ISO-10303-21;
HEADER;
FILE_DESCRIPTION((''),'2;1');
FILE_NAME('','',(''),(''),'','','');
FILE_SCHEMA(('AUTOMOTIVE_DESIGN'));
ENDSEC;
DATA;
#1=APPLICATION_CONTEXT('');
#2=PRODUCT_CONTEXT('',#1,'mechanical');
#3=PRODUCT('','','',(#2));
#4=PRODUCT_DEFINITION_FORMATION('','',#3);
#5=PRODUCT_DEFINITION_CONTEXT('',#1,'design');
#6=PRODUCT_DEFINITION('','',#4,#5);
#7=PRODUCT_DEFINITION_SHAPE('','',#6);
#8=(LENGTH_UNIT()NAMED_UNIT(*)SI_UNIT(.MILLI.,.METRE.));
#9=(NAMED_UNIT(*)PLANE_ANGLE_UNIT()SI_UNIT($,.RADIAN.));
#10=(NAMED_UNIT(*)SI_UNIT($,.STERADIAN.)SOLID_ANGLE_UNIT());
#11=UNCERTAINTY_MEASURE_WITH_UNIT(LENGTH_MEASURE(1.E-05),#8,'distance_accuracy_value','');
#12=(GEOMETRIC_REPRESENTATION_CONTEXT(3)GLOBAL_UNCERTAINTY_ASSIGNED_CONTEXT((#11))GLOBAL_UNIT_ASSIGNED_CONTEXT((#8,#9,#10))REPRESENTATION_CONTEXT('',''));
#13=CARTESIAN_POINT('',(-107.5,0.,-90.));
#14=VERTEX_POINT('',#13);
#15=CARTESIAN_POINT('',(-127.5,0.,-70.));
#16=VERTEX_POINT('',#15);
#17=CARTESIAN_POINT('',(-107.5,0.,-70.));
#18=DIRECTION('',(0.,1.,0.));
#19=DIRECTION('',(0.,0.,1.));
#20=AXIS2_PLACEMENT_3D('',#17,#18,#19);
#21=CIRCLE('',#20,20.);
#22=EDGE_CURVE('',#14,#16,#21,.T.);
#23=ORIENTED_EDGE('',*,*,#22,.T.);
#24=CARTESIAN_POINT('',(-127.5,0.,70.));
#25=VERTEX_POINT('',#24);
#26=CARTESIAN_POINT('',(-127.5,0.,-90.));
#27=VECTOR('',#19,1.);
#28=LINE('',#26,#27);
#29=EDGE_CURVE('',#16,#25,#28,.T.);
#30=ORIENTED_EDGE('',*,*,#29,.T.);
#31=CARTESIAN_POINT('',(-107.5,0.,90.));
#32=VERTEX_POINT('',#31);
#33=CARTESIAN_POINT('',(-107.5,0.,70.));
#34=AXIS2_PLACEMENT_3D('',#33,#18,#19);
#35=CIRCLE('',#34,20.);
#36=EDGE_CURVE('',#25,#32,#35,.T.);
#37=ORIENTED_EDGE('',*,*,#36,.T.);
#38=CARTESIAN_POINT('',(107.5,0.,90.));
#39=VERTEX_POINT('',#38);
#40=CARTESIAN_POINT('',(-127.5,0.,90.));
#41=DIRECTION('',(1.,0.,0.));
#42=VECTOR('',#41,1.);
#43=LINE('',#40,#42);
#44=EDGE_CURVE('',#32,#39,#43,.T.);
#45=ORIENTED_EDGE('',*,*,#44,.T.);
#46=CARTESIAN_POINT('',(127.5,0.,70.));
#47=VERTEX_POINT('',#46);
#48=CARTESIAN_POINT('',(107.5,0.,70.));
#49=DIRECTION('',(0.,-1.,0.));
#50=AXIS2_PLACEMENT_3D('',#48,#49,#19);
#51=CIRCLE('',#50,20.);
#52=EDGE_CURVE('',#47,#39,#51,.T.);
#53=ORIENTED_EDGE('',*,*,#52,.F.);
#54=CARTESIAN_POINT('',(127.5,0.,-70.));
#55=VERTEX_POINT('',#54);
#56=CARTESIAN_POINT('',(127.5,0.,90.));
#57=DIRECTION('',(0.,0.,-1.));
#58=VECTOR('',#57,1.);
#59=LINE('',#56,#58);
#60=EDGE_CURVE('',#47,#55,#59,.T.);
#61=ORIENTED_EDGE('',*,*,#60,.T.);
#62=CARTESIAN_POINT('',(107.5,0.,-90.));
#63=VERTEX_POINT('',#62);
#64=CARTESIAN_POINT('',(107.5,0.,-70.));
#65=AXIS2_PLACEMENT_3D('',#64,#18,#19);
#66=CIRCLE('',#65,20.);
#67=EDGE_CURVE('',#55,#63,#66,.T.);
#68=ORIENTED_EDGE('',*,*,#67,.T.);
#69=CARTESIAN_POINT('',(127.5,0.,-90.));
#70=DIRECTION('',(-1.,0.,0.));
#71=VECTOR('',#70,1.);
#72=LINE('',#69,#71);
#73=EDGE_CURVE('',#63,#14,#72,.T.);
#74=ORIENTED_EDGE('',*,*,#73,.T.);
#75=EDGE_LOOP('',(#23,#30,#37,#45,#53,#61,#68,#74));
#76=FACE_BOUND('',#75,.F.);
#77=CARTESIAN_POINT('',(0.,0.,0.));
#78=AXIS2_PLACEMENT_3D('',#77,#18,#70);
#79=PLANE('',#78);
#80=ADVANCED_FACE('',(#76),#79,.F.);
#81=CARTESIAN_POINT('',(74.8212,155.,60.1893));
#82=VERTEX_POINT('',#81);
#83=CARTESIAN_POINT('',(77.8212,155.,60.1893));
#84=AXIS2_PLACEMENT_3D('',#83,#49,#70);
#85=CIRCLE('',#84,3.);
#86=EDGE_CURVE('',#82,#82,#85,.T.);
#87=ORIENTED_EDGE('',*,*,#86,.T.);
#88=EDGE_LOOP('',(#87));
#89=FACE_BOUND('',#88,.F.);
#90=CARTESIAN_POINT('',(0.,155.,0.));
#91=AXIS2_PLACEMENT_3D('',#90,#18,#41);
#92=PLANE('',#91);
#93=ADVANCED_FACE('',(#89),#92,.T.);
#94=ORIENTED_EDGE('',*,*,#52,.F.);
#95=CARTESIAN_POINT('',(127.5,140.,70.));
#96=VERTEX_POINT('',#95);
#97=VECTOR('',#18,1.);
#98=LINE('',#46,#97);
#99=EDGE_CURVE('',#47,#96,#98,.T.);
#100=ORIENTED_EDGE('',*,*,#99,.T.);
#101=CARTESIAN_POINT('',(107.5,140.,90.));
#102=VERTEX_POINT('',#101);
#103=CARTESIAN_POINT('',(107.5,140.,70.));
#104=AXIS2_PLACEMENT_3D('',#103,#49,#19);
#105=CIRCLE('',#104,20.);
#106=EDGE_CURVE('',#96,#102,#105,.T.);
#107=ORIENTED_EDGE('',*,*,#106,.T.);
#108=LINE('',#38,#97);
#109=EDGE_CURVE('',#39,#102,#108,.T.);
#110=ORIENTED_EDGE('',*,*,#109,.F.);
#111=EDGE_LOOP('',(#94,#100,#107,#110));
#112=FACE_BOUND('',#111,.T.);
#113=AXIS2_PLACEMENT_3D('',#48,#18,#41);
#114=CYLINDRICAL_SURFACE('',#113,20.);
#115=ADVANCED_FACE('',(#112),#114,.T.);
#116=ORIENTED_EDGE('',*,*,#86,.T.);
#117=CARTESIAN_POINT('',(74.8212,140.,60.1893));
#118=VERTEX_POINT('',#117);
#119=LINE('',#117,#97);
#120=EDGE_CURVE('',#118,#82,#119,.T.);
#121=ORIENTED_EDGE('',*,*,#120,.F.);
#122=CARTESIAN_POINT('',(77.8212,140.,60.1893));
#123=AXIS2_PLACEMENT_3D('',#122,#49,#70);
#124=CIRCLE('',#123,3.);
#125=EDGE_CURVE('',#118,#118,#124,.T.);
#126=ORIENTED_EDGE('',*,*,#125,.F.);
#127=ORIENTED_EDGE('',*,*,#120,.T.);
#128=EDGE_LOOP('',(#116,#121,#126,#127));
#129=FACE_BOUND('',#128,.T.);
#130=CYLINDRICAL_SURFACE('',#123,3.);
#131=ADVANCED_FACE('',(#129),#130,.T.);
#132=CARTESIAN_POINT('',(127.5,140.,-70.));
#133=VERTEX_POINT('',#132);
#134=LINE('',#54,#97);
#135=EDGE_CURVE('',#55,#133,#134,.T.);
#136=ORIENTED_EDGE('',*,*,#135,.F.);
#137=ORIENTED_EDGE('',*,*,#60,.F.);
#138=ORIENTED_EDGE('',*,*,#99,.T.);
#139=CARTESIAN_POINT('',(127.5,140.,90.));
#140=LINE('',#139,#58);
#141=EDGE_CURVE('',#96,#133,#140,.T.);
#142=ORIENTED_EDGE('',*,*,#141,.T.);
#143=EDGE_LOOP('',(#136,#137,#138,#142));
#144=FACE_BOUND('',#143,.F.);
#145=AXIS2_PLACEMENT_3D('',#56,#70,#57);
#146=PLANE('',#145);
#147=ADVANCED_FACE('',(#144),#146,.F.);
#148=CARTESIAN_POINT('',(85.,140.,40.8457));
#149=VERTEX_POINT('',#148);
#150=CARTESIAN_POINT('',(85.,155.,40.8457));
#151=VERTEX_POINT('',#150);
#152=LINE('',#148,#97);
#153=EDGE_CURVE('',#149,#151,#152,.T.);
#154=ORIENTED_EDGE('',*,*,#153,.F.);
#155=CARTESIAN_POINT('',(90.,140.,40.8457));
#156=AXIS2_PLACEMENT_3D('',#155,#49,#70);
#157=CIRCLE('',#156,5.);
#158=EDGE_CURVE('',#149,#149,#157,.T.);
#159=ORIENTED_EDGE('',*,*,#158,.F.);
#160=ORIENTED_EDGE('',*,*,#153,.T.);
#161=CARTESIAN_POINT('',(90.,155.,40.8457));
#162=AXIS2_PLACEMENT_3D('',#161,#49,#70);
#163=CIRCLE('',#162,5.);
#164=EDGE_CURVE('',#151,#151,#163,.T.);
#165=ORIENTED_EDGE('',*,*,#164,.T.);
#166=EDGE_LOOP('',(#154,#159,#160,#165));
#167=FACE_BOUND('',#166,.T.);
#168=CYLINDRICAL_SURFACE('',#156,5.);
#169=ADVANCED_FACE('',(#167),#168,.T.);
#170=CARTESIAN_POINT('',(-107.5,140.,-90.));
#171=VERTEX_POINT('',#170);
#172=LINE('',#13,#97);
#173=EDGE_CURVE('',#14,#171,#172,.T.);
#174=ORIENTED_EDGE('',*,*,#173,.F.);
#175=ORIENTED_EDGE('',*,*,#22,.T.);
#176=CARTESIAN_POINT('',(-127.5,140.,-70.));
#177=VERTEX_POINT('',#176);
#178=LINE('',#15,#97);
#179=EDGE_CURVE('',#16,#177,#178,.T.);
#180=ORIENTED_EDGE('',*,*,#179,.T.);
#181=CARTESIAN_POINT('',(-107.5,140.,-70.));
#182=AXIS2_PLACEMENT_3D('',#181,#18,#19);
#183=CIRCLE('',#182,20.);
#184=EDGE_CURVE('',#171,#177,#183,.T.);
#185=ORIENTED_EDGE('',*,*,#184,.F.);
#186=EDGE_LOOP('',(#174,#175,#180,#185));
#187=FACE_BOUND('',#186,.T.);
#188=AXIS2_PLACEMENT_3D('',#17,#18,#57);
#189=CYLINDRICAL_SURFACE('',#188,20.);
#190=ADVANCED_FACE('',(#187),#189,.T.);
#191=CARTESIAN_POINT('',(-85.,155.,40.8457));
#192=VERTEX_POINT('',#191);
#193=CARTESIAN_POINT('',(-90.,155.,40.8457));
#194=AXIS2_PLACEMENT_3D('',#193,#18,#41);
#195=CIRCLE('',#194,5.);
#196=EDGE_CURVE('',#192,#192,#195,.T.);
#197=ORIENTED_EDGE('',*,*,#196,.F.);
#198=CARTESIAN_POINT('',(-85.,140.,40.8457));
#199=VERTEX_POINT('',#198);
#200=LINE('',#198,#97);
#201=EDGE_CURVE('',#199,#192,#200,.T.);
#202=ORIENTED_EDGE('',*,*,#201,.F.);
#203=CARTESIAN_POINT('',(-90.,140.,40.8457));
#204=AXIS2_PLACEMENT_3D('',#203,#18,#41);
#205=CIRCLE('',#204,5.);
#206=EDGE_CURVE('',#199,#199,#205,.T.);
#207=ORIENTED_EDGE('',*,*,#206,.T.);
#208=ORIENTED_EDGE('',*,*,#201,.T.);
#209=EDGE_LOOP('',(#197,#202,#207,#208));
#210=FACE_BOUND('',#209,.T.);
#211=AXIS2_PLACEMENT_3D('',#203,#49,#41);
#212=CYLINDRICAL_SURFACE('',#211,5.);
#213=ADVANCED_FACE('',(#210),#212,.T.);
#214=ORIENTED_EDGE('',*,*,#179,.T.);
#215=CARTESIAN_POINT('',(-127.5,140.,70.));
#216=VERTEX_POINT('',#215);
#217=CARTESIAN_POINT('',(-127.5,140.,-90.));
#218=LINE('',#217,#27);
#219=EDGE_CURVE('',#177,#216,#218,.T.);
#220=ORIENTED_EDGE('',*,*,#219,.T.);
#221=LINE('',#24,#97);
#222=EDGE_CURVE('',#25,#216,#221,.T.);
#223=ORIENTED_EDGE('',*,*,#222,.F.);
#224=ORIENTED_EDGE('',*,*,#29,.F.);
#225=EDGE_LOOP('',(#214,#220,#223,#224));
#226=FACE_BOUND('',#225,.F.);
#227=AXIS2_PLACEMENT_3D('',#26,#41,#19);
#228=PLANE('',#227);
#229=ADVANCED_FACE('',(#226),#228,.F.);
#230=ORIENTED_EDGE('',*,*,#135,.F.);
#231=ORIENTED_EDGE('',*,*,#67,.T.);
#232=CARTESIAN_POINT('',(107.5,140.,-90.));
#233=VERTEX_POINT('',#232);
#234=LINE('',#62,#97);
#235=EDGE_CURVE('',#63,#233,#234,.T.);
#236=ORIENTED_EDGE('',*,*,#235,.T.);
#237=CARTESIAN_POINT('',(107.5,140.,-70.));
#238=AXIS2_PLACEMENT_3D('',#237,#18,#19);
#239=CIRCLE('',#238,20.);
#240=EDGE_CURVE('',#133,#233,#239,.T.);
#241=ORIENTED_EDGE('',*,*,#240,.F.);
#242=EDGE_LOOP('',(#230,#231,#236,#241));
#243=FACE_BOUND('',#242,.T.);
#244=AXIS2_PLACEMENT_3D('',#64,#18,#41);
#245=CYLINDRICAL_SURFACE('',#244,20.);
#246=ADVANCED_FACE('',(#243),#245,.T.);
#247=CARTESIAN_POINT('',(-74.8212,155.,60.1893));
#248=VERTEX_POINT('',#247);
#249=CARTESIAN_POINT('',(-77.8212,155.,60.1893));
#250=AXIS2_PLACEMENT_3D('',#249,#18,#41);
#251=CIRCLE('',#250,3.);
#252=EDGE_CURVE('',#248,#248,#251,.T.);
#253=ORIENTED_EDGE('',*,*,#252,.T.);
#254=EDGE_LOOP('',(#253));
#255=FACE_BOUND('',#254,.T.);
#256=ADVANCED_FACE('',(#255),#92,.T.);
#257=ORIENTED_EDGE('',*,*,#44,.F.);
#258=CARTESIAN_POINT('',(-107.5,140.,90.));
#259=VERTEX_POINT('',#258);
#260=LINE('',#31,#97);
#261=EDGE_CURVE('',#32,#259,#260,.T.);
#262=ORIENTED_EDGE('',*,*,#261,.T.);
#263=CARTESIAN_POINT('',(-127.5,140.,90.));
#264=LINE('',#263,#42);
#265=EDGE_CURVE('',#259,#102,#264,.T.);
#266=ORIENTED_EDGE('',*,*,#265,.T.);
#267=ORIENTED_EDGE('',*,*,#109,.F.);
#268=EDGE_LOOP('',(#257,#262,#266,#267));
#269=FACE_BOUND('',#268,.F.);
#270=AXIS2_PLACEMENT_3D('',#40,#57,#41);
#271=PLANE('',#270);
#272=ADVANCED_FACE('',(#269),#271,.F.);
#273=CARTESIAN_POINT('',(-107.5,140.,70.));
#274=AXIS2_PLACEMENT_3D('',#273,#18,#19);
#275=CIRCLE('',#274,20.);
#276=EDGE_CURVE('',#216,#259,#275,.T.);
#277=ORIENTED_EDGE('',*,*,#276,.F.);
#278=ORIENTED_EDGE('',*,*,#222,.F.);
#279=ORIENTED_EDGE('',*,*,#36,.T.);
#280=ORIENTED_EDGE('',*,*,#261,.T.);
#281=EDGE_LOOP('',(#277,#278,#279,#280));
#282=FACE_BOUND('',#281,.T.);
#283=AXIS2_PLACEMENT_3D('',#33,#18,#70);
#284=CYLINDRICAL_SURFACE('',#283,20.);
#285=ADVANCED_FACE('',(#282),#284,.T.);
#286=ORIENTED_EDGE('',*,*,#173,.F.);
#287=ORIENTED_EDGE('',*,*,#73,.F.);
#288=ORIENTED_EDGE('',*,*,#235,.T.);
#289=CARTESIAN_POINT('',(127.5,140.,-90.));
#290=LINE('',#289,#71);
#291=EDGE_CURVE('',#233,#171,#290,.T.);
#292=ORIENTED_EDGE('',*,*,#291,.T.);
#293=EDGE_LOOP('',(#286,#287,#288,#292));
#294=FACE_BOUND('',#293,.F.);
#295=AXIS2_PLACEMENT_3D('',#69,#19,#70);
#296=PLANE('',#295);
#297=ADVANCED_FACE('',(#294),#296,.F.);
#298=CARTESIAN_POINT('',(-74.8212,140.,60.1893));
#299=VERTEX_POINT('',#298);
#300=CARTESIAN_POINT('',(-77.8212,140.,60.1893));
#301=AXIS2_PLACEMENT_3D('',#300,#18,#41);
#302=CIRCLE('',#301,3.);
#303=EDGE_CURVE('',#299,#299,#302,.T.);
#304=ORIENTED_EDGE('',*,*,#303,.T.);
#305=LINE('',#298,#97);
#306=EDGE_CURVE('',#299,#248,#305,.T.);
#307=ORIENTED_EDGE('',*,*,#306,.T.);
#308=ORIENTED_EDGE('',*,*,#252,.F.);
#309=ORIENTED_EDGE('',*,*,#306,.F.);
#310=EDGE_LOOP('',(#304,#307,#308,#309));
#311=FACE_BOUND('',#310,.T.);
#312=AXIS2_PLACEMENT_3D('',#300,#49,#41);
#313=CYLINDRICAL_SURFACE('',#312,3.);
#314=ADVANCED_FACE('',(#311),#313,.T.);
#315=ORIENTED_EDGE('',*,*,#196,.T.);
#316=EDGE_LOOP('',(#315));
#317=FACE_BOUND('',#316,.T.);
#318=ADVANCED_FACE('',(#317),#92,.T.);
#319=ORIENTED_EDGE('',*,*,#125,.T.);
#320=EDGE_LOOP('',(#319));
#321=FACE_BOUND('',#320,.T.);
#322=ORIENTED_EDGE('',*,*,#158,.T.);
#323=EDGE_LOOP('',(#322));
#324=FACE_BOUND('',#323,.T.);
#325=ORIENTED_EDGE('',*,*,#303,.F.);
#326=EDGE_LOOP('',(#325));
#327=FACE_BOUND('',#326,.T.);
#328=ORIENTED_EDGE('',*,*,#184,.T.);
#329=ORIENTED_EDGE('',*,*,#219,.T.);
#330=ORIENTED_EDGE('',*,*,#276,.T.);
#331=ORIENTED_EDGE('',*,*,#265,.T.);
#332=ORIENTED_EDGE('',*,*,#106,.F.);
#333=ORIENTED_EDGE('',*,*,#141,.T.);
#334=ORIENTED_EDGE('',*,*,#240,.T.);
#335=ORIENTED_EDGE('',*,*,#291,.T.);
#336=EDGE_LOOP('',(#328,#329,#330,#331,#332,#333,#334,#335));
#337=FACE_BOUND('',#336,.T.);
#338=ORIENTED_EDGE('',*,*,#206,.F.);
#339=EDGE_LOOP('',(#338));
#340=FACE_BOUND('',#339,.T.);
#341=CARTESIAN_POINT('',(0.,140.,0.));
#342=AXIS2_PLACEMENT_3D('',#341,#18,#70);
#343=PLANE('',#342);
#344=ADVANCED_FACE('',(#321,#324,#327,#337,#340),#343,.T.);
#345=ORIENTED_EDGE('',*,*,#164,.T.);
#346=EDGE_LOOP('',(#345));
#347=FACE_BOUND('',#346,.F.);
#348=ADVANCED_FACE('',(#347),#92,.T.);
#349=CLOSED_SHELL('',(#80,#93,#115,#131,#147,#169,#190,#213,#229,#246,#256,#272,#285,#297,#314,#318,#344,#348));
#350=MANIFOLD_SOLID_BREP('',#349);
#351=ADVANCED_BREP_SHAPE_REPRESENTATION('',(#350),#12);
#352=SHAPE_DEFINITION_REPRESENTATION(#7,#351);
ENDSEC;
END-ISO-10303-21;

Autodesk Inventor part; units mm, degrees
ref_plane "YZ Plane" through (0, 0, 0) normal (1, 0, 0) x (0, 1, 0)
ref_plane "XZ Plane" through (0, 0, 0) normal (0, 1, 0) x (-1, 0, 0)
ref_plane "XY Plane" through (0, 0, 0) normal (0, 0, 1) x (1, 0, 0)
sketch "Sketch1" plane through (0, 0, 0) normal (0, 1, 0) x (-1, 0, 0)
  line L0 (127.5, 90) -> (-127.5, 90)
  line L1 (-127.5, 90) -> (-127.5, -90)
  line L2 (-127.5, -90) -> (127.5, -90)
  line L3 (127.5, -90) -> (127.5, 90)
  line L4 (127.5, 90) -> (-127.5, -90) construction
  line L5 (-127.5, 90) -> (127.5, -90) construction
  point P0 (0, 0)
  dimension "d0" = 255
  dimension "d1" = 180
extrude "Extrusion1" add sketch "Sketch1" along normal blind 140
fillet "Face Fillet1" radius 20 1 edges at (127.5, 70, 90)
fillet "Face Fillet2" radius 20 1 edges at (127.5, 70, -90)
fillet "Face Fillet3" radius 20 1 edges at (-127.5, 70, -90)
fillet "Face Fillet4" radius 20 1 edges at (-127.5, 70, 90)
sketch "Sketch2" plane through (0, 140, 0) normal (0, 1, 0) x (1, 0, 0)
  line L0 (0, 0) -> (0, -90)
  line L1 (-107.5, -90) -> (107.5, -90) projected
  line L2 (-127.5, 70) -> (-127.5, -70) projected
  circle A0 centre (-90, -40.8457) radius 5
  circle A1 centre (-77.8212, -60.1893) radius 3
  dimension "d9" = 10
  dimension "d10" = 6
extrude "Extrusion2" add sketch "Sketch2" along normal blind 15
mirror "Mirror1" about plane through (0, 0, 0) normal (1, 0, 0) of "Extrusion2"
properties part number "Battery"
